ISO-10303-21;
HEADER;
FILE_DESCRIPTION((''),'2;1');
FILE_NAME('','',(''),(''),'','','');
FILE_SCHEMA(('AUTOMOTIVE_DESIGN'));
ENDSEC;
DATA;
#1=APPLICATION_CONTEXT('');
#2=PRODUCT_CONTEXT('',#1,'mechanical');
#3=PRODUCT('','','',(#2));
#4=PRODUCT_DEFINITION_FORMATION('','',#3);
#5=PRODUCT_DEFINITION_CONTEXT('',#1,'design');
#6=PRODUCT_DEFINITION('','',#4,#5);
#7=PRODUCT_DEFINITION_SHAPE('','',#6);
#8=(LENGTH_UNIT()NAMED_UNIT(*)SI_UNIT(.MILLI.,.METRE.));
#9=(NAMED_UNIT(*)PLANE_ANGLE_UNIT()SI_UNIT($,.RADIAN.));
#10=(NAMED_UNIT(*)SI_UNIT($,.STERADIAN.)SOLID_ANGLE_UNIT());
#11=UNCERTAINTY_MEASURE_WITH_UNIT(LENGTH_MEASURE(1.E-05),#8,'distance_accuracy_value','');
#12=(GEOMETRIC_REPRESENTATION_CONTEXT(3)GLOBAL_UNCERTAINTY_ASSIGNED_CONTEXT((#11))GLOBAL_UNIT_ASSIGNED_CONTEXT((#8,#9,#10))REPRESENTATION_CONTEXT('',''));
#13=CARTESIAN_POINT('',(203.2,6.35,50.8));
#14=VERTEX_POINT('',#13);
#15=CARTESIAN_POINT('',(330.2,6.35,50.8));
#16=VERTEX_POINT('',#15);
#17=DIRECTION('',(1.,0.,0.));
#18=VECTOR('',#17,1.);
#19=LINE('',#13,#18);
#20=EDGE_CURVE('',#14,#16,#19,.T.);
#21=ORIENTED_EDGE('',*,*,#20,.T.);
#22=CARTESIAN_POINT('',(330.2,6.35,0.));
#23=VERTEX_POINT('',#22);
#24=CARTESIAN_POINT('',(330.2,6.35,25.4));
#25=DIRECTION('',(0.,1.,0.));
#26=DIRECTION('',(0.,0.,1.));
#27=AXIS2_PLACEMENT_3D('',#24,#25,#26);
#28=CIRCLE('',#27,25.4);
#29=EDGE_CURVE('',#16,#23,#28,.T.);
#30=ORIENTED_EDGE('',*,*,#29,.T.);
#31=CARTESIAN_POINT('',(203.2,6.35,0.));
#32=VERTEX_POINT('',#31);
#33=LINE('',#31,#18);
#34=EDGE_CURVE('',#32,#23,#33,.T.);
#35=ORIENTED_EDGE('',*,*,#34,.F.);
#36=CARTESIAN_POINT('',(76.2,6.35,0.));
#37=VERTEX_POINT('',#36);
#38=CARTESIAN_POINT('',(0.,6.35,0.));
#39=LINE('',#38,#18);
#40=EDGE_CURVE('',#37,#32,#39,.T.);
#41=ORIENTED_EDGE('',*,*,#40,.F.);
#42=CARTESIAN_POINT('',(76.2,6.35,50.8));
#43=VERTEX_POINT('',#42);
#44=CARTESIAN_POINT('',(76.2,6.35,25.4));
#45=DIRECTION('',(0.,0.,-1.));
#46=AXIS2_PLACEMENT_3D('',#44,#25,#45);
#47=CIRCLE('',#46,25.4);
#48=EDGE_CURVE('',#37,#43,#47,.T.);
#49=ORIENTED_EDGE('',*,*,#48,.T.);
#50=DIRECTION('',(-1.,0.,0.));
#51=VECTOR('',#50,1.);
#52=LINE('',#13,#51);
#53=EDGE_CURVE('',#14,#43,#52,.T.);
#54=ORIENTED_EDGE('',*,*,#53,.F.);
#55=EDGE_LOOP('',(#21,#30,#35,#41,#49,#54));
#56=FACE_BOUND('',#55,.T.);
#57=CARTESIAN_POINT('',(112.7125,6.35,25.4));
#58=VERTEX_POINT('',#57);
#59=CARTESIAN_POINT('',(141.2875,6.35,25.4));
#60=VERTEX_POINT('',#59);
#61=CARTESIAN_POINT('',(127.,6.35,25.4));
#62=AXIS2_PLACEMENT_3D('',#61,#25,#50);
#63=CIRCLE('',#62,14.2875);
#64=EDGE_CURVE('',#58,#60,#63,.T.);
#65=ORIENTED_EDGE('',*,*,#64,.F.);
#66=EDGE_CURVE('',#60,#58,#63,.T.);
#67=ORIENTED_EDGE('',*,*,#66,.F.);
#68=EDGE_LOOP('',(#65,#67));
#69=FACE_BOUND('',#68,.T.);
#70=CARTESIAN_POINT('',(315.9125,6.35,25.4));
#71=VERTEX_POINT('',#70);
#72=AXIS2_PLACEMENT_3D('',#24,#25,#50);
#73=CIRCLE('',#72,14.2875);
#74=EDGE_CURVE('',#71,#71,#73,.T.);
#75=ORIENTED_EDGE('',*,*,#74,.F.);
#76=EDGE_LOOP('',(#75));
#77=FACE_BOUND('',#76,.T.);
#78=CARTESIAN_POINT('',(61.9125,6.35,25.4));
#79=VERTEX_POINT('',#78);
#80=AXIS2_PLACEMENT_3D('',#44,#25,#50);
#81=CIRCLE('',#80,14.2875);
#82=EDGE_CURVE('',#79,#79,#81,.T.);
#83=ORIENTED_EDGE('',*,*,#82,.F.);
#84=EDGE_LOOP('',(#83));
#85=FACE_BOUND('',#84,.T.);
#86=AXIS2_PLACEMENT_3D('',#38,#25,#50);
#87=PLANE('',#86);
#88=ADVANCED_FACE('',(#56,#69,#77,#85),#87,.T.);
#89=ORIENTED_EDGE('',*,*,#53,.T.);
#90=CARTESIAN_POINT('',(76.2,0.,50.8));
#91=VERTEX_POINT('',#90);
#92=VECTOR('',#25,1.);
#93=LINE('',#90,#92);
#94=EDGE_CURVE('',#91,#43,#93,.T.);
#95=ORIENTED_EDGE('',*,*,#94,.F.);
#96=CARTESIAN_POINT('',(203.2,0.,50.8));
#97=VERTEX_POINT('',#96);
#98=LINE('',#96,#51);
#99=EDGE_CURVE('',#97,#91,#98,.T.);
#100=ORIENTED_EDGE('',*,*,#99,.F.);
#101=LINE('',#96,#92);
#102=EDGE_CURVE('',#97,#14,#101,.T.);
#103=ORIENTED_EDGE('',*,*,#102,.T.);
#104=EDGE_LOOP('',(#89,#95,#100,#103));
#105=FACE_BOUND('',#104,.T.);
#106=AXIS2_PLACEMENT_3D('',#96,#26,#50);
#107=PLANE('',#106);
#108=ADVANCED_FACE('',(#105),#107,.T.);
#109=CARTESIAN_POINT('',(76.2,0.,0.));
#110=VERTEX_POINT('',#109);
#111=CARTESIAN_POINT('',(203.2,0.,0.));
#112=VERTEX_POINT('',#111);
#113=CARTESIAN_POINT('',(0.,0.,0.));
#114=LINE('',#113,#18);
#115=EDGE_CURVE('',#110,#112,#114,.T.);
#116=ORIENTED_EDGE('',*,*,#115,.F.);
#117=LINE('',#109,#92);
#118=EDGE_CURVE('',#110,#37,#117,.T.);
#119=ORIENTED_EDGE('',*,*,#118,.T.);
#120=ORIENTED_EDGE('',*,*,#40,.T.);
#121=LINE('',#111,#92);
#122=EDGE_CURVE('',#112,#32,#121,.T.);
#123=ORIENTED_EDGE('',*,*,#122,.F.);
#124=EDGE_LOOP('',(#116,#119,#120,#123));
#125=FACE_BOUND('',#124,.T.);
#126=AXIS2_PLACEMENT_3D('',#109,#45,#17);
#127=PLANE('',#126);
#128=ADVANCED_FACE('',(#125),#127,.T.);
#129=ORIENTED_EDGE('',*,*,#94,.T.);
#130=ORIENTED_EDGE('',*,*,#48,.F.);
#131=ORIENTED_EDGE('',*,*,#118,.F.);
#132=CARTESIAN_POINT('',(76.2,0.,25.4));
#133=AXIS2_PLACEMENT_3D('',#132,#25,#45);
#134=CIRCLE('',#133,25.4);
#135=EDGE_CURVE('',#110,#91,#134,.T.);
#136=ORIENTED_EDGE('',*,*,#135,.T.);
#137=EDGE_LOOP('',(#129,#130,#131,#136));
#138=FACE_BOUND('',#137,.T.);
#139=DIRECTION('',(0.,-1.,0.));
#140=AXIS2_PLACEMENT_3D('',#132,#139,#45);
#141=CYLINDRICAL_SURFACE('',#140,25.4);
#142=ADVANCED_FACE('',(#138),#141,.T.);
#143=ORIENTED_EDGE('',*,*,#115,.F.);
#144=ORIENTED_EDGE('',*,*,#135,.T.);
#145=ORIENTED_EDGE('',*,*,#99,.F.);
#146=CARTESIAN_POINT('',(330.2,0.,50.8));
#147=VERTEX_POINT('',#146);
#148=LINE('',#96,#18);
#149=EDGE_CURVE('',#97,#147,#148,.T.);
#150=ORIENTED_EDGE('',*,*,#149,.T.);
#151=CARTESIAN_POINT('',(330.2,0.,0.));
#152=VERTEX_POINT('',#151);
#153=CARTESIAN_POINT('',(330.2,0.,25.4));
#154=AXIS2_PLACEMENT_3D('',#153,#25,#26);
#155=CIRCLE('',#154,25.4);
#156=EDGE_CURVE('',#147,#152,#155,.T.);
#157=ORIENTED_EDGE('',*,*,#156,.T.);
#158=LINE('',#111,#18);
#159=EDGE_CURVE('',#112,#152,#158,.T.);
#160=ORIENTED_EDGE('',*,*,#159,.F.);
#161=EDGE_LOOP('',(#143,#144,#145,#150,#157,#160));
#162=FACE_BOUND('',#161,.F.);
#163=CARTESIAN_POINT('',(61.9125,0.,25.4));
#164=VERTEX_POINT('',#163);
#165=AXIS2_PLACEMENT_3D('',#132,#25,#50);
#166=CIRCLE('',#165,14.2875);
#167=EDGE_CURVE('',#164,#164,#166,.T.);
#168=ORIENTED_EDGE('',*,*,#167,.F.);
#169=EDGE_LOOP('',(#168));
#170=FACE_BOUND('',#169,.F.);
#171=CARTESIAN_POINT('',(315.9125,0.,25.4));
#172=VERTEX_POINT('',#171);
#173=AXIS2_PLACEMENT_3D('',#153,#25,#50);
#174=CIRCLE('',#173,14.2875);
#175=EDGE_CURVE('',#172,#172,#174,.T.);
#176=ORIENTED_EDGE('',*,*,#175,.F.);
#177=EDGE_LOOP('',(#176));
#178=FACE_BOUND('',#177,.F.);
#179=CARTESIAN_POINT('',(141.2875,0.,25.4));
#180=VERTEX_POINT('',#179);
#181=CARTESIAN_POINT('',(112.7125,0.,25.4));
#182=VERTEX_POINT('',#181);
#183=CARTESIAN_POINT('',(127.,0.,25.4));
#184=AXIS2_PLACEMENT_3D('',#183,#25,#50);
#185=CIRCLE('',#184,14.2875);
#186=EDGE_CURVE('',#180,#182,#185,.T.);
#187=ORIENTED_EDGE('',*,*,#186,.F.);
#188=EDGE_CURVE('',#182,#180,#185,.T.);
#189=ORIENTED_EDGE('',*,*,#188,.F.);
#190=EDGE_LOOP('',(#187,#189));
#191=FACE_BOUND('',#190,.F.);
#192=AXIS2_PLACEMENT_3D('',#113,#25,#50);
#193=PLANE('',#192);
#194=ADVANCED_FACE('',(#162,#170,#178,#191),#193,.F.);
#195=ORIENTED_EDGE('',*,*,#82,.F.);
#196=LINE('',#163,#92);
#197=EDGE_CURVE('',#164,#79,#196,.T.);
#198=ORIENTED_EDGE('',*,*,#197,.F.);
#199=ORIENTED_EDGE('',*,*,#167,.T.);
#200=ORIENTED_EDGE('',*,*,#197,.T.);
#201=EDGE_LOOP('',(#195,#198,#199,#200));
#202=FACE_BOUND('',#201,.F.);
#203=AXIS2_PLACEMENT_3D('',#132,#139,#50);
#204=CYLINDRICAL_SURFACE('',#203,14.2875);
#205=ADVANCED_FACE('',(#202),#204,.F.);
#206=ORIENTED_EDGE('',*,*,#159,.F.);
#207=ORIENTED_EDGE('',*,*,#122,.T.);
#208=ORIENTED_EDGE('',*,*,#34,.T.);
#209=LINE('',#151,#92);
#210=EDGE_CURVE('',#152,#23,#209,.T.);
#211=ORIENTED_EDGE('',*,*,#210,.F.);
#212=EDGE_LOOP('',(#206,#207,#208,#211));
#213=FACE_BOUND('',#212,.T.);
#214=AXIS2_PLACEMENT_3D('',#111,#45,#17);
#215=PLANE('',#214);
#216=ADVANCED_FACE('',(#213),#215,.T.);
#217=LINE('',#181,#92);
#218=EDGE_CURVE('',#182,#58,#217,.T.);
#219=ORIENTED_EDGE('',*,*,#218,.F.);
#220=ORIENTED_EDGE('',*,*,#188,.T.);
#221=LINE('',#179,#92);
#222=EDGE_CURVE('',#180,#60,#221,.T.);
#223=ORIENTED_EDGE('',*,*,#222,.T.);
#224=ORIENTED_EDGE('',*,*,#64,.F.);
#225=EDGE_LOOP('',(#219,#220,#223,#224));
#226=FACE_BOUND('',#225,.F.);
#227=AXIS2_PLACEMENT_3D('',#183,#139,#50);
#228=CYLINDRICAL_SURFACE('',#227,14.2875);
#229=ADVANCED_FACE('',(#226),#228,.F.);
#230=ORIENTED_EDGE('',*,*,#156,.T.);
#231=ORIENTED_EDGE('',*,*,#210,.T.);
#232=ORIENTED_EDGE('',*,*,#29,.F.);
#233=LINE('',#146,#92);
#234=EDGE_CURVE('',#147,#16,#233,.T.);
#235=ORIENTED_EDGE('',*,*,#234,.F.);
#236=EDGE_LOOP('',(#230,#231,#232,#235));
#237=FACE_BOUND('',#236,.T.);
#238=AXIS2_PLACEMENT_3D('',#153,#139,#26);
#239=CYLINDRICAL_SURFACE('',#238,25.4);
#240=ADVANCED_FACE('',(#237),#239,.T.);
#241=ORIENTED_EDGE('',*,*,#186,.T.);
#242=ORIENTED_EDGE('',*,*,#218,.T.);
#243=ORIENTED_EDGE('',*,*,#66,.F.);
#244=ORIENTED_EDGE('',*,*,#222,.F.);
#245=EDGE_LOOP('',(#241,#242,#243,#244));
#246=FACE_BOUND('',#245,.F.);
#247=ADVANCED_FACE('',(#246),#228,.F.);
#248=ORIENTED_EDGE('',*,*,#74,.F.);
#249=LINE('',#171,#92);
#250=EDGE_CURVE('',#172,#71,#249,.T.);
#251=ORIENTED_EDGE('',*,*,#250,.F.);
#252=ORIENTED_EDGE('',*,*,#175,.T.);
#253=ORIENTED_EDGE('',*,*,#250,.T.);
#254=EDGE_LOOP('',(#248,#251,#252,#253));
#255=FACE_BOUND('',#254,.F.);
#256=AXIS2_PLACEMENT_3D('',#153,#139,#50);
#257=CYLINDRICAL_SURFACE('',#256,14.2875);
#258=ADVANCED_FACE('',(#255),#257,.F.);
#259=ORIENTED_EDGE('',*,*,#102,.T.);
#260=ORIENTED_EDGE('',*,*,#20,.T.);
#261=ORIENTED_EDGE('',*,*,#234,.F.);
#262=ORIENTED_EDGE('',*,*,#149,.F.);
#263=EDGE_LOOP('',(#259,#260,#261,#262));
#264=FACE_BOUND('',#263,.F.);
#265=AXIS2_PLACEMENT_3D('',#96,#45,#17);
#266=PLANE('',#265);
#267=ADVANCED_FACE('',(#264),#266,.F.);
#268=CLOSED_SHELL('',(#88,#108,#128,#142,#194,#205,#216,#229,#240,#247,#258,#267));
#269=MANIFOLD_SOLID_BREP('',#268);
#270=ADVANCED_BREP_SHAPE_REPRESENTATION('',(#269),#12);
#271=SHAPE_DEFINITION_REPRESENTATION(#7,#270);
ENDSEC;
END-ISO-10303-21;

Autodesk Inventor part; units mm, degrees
ref_plane "YZ Plane" through (0, 0, 0) normal (1, 0, 0) x (0, 1, 0)
ref_plane "XZ Plane" through (0, 0, 0) normal (0, 1, 0) x (-1, 0, 0)
ref_plane "XY Plane" through (0, 0, 0) normal (0, 0, 1) x (1, 0, 0)
sketch "Sketch1" plane through (0, 0, 0) normal (0, 1, 0) x (-1, 0, 0)
  line L0 (0, 0) -> (-203.2, 0)
  line L1 (0, 25.4) -> (-76.2, 25.4) construction
  line L2 (-203.2, 25.4) -> (-127, 25.4) construction
  line L3 (-127, 25.4) -> (-330.2, 25.4)
  line L4 (0, 0) -> (-203.2, 0)
  line L5 (-203.2, 50.8) -> (0, 50.8)
  line L6 (-203.2, 0) -> (-330.2, 0)
  line L7 (-203.2, 50.8) -> (-330.2, 50.8)
  arc A0 (-330.2, 50.8) -> (-330.2, 0) centre (-330.2, 25.4) ccw
  arc A1 (0, 0) -> (0, 50.8) centre (0, 25.4) ccw
  arc A2 (-76.2, 0) -> (-76.2, 50.8) centre (-76.2, 25.4) ccw
  circle A3 centre (-330.2, 25.4) radius 14.2875
  circle A4 centre (-127, 25.4) radius 14.2875
  circle A5 centre (-76.2, 25.4) radius 14.2875
  point P0 (-331.4575, 38.0376)
  point P1 (-331.4575, 12.7624)
  point P2 (-76.2, 0)
  dimension "d2" = 76.2
  dimension "d3" = 76.2
  dimension "d8" = 203.2
  dimension "d12" = 50.8
  dimension "d17" = 28.575
  dimension "d18" = 28.575
  dimension "d19" = 28.575
extrude "Extrusion1" add sketch "Sketch1" along normal blind 6.35 contours L0 L6 A0 L7 L5 A2
properties part number "4-bar intake block"
